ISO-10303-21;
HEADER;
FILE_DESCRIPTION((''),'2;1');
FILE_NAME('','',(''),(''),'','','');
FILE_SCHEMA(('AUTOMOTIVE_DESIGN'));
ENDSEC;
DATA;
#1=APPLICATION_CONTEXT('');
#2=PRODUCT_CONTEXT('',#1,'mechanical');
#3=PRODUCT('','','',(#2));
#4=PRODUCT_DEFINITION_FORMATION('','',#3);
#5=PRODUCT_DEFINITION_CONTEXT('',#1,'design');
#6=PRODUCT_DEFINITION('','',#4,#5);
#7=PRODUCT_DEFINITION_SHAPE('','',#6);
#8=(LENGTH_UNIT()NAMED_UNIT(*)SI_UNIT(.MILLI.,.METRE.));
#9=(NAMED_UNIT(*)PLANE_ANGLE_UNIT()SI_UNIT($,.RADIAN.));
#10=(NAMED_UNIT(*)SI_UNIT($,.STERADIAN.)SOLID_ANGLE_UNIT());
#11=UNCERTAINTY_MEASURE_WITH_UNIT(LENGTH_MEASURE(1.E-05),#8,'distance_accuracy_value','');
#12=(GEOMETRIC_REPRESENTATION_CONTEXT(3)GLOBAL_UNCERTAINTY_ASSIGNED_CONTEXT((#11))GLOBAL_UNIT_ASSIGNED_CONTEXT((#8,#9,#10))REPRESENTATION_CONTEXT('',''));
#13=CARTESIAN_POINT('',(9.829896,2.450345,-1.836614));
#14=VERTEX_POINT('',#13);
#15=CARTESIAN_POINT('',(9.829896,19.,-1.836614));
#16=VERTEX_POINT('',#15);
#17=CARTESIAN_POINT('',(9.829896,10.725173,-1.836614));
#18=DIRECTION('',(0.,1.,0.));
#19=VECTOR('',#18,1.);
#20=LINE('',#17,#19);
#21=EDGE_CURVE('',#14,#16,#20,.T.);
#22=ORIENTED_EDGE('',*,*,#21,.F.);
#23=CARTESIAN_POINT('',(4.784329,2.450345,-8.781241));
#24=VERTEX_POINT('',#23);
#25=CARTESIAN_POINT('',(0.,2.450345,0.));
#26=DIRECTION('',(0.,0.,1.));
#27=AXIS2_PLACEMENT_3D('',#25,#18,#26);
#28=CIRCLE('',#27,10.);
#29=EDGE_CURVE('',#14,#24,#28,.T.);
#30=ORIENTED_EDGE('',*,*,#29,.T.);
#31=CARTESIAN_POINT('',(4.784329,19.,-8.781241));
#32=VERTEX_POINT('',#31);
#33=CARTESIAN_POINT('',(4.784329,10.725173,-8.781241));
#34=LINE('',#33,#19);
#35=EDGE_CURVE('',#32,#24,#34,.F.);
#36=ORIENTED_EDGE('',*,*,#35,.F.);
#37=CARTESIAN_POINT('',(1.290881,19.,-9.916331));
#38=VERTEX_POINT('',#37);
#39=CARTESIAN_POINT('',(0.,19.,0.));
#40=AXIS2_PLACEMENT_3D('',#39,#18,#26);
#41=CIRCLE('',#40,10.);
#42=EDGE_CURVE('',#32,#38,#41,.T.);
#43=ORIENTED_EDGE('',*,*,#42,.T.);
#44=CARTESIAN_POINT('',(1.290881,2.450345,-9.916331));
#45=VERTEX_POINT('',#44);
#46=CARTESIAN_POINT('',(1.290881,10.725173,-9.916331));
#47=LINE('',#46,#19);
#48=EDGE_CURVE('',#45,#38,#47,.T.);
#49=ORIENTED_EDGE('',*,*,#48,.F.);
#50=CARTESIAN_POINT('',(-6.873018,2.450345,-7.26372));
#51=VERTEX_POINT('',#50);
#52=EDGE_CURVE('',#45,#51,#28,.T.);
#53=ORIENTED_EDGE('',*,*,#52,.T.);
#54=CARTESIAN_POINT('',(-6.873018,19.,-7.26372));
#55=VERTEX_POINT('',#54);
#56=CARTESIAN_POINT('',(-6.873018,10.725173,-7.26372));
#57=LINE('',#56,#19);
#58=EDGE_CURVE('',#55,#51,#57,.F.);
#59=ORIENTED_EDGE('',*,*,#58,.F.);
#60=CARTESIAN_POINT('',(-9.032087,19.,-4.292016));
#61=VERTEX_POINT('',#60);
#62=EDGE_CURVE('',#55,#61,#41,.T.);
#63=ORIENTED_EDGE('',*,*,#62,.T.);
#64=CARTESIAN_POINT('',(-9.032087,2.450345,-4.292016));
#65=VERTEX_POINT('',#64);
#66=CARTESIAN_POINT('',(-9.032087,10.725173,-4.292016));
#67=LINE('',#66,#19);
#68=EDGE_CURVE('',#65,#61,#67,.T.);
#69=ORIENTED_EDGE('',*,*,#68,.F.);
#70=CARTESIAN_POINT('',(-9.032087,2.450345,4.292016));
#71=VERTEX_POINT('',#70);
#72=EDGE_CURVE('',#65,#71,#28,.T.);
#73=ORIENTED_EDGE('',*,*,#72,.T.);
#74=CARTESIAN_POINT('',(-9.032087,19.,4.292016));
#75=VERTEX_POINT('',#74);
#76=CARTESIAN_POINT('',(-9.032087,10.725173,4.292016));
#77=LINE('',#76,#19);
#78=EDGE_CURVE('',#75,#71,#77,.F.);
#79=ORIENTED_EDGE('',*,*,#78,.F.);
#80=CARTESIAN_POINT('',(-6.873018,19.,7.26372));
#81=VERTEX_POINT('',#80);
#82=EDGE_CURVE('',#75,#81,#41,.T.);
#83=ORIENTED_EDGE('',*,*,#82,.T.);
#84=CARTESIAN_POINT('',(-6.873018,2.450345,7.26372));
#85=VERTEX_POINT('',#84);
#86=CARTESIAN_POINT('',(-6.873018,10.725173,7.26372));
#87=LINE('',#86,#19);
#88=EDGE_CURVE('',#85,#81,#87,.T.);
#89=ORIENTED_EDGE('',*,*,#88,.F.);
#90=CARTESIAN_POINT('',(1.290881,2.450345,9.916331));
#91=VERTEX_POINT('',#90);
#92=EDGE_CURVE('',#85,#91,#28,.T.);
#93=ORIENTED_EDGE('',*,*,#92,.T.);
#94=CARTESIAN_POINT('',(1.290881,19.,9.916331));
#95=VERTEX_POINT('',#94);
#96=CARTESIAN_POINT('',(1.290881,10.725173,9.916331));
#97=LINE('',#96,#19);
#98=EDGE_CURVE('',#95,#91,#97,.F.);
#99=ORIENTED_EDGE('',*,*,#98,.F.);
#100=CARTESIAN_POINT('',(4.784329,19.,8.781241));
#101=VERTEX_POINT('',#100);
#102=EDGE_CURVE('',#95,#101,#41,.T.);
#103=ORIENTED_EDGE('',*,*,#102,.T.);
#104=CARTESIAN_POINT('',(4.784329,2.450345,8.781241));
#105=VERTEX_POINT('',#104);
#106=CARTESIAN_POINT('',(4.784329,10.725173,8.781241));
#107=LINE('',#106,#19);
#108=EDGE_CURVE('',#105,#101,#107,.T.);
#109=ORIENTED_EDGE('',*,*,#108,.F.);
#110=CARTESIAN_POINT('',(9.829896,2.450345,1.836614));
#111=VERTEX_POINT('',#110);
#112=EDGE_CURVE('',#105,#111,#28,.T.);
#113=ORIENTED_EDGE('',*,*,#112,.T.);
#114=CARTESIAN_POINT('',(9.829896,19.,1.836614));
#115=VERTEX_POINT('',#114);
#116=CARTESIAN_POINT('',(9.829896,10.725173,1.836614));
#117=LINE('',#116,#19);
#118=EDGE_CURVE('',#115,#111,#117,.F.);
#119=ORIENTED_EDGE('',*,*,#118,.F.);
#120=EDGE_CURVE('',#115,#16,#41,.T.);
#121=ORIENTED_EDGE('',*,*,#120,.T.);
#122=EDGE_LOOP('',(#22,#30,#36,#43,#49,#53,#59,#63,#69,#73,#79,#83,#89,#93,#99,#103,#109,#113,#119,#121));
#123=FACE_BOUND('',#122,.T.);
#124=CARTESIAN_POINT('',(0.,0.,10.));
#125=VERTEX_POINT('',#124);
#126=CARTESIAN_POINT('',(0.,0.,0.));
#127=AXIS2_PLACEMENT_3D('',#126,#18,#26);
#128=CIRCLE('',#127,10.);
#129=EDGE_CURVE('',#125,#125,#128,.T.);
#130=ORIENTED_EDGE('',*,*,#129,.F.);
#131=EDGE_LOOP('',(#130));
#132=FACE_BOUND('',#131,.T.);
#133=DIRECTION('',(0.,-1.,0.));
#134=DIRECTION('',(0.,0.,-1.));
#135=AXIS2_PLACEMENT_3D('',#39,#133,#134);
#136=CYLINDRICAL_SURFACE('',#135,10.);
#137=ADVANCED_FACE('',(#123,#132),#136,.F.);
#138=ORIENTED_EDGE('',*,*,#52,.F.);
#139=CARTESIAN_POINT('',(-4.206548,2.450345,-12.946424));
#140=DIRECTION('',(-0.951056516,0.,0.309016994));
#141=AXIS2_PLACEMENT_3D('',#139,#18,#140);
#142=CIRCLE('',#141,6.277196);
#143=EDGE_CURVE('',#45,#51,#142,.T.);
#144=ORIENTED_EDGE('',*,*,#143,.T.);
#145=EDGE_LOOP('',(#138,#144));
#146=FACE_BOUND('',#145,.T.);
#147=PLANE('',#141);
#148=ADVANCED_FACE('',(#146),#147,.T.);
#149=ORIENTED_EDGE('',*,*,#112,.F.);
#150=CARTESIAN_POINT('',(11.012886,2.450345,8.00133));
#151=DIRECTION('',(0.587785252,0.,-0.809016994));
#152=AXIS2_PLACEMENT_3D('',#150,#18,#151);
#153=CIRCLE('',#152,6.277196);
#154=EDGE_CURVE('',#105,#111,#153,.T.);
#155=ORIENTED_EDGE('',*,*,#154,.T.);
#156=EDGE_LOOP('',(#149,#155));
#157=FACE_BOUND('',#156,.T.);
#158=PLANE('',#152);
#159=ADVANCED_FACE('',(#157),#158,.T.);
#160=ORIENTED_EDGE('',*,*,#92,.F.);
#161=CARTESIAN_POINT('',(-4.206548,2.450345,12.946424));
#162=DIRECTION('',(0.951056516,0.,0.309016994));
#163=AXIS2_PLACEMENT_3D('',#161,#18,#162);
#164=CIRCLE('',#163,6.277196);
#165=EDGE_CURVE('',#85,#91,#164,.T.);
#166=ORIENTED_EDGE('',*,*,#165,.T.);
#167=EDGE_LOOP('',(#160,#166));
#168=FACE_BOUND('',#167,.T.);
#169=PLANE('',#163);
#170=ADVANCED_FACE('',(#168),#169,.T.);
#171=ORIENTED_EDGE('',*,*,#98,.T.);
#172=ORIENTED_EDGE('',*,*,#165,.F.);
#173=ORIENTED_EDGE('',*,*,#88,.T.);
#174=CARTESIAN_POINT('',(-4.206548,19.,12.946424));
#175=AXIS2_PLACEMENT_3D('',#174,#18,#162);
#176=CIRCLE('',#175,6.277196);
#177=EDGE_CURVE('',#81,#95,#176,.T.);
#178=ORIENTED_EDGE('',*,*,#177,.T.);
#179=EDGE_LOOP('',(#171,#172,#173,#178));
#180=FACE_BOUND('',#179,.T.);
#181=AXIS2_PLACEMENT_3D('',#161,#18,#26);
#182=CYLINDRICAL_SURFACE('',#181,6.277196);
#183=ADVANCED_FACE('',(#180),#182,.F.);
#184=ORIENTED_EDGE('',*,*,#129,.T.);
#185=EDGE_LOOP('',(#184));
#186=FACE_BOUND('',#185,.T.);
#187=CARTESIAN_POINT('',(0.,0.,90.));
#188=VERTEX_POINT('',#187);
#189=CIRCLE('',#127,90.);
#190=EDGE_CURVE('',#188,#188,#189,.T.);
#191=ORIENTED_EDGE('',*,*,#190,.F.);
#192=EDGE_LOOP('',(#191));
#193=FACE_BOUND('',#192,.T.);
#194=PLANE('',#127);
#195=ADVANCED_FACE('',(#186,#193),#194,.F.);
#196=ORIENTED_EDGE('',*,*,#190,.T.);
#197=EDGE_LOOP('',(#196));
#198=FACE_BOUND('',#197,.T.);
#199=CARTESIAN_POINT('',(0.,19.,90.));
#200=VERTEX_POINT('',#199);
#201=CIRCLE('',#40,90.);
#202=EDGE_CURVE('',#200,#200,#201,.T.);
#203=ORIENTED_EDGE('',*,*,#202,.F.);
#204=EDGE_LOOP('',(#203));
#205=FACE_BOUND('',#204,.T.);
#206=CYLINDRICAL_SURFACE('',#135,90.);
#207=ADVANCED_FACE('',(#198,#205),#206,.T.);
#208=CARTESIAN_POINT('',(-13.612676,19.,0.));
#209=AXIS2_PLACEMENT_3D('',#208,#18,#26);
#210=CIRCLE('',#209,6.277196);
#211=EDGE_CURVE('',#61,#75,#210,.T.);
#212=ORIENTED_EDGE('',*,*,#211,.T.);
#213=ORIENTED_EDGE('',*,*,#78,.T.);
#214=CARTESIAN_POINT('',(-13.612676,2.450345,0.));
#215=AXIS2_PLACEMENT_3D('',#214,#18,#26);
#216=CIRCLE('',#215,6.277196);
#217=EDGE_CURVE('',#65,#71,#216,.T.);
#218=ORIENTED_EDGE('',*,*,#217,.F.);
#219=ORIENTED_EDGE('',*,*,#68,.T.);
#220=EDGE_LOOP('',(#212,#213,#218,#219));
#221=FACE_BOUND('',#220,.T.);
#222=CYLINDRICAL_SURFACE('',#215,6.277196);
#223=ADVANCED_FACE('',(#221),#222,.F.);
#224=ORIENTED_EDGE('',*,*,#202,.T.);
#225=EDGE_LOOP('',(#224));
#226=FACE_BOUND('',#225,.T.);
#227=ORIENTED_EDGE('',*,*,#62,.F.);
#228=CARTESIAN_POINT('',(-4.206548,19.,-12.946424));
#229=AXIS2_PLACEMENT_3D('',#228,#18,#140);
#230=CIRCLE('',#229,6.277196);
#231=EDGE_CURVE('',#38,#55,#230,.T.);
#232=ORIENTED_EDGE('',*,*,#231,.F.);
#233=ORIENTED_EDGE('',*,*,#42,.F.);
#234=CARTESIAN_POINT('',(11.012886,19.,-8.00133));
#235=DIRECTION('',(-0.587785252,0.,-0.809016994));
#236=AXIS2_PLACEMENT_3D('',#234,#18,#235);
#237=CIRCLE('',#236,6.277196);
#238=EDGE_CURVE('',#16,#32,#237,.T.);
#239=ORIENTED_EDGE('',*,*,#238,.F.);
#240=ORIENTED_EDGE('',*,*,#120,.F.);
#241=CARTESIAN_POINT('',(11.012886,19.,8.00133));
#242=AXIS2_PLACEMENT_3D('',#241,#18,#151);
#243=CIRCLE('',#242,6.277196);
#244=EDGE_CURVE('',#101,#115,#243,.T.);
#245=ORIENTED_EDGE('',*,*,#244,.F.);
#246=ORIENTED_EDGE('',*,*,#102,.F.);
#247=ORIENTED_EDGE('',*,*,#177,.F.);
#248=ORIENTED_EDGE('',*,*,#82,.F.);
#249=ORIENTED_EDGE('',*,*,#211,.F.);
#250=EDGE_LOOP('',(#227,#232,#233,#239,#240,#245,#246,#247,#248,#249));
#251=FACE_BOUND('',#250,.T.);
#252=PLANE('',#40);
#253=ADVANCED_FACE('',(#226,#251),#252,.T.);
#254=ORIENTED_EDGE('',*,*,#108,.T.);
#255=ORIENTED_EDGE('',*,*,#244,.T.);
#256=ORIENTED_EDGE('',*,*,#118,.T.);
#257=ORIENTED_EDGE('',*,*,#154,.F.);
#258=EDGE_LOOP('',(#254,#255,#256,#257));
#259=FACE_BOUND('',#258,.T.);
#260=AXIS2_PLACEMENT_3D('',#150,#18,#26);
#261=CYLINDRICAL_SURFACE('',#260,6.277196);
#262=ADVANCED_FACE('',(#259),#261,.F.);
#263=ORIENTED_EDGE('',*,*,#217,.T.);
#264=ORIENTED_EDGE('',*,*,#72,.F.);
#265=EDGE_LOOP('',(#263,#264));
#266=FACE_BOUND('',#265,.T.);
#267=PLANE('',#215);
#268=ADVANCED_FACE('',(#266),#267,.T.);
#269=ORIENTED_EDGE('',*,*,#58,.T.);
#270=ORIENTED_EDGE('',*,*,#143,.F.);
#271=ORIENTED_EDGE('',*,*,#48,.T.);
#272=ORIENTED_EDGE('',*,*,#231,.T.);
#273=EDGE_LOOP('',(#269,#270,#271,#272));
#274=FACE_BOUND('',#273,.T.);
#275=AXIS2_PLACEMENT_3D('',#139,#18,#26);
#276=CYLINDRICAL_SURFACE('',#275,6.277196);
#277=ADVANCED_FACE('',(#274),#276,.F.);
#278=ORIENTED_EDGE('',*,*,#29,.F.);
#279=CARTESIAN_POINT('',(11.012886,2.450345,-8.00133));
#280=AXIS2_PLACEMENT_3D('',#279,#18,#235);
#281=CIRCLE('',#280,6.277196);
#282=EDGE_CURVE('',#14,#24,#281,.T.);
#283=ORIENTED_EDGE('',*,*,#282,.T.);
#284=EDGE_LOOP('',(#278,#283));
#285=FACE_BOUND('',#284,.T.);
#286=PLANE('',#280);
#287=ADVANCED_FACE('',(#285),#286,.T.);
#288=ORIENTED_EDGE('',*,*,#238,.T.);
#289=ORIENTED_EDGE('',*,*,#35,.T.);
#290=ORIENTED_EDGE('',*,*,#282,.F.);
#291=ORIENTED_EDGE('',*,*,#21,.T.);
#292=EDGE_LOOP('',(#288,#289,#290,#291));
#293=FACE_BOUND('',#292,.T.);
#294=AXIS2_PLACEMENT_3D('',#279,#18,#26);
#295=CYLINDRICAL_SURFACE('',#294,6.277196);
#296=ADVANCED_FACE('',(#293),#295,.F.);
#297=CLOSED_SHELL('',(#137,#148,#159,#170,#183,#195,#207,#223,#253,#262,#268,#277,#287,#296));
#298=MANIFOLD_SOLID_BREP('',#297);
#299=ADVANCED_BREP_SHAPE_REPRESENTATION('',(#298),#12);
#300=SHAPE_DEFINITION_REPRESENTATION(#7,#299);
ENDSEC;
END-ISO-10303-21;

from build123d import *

# Parameters (mm, degrees)
SKETCH1_R           = 90
BOSS_EXTRUDE1_DEPTH = 19
SKETCH2_R           = 10
CUT_EXTRUDE1_DEPTH  = 129.689548915
SKETCH3_R           = 6.277196243
CUT_EXTRUDE2_DEPTH  = 16.549654973
CIRPATTERN1_COUNT   = 5


with BuildPart() as part:
    # Sketch1 → Boss-Extrude1 (new body)
    with BuildSketch(Plane(origin=(0, 0, 0), x_dir=(1, 0, 0), z_dir=(0, 1, 0))):
        Circle(SKETCH1_R)
    extrude(amount=BOSS_EXTRUDE1_DEPTH)

    # Sketch2 → Cut-Extrude1 (cut, through all)
    with BuildSketch(Plane(origin=(0, 0, 0), x_dir=(1, 0, 0), z_dir=(0, 1, 0))):
        Circle(SKETCH2_R)
    extrude(amount=CUT_EXTRUDE1_DEPTH, mode=Mode.SUBTRACT)

    # Sketch3 → Cut-Extrude2 (cut)
    with BuildSketch(Plane(origin=(0, 19, 0), x_dir=(1, 0, 0), z_dir=(0, 1, 0))):
        with Locations((-13.61267623, 0)):
            Circle(SKETCH3_R)
    cut_extrude2 = extrude(amount=-CUT_EXTRUDE2_DEPTH, mode=Mode.SUBTRACT)

    # CirPattern1: Cut-Extrude2 ×5 about axis
    cirpattern1_axis = Axis((0, 0, 0), (0, 1, 0))
    for i in range(1, CIRPATTERN1_COUNT):
        add(cut_extrude2.rotate(cirpattern1_axis, i * 360 / CIRPATTERN1_COUNT), mode=Mode.SUBTRACT)


solid = part.part
